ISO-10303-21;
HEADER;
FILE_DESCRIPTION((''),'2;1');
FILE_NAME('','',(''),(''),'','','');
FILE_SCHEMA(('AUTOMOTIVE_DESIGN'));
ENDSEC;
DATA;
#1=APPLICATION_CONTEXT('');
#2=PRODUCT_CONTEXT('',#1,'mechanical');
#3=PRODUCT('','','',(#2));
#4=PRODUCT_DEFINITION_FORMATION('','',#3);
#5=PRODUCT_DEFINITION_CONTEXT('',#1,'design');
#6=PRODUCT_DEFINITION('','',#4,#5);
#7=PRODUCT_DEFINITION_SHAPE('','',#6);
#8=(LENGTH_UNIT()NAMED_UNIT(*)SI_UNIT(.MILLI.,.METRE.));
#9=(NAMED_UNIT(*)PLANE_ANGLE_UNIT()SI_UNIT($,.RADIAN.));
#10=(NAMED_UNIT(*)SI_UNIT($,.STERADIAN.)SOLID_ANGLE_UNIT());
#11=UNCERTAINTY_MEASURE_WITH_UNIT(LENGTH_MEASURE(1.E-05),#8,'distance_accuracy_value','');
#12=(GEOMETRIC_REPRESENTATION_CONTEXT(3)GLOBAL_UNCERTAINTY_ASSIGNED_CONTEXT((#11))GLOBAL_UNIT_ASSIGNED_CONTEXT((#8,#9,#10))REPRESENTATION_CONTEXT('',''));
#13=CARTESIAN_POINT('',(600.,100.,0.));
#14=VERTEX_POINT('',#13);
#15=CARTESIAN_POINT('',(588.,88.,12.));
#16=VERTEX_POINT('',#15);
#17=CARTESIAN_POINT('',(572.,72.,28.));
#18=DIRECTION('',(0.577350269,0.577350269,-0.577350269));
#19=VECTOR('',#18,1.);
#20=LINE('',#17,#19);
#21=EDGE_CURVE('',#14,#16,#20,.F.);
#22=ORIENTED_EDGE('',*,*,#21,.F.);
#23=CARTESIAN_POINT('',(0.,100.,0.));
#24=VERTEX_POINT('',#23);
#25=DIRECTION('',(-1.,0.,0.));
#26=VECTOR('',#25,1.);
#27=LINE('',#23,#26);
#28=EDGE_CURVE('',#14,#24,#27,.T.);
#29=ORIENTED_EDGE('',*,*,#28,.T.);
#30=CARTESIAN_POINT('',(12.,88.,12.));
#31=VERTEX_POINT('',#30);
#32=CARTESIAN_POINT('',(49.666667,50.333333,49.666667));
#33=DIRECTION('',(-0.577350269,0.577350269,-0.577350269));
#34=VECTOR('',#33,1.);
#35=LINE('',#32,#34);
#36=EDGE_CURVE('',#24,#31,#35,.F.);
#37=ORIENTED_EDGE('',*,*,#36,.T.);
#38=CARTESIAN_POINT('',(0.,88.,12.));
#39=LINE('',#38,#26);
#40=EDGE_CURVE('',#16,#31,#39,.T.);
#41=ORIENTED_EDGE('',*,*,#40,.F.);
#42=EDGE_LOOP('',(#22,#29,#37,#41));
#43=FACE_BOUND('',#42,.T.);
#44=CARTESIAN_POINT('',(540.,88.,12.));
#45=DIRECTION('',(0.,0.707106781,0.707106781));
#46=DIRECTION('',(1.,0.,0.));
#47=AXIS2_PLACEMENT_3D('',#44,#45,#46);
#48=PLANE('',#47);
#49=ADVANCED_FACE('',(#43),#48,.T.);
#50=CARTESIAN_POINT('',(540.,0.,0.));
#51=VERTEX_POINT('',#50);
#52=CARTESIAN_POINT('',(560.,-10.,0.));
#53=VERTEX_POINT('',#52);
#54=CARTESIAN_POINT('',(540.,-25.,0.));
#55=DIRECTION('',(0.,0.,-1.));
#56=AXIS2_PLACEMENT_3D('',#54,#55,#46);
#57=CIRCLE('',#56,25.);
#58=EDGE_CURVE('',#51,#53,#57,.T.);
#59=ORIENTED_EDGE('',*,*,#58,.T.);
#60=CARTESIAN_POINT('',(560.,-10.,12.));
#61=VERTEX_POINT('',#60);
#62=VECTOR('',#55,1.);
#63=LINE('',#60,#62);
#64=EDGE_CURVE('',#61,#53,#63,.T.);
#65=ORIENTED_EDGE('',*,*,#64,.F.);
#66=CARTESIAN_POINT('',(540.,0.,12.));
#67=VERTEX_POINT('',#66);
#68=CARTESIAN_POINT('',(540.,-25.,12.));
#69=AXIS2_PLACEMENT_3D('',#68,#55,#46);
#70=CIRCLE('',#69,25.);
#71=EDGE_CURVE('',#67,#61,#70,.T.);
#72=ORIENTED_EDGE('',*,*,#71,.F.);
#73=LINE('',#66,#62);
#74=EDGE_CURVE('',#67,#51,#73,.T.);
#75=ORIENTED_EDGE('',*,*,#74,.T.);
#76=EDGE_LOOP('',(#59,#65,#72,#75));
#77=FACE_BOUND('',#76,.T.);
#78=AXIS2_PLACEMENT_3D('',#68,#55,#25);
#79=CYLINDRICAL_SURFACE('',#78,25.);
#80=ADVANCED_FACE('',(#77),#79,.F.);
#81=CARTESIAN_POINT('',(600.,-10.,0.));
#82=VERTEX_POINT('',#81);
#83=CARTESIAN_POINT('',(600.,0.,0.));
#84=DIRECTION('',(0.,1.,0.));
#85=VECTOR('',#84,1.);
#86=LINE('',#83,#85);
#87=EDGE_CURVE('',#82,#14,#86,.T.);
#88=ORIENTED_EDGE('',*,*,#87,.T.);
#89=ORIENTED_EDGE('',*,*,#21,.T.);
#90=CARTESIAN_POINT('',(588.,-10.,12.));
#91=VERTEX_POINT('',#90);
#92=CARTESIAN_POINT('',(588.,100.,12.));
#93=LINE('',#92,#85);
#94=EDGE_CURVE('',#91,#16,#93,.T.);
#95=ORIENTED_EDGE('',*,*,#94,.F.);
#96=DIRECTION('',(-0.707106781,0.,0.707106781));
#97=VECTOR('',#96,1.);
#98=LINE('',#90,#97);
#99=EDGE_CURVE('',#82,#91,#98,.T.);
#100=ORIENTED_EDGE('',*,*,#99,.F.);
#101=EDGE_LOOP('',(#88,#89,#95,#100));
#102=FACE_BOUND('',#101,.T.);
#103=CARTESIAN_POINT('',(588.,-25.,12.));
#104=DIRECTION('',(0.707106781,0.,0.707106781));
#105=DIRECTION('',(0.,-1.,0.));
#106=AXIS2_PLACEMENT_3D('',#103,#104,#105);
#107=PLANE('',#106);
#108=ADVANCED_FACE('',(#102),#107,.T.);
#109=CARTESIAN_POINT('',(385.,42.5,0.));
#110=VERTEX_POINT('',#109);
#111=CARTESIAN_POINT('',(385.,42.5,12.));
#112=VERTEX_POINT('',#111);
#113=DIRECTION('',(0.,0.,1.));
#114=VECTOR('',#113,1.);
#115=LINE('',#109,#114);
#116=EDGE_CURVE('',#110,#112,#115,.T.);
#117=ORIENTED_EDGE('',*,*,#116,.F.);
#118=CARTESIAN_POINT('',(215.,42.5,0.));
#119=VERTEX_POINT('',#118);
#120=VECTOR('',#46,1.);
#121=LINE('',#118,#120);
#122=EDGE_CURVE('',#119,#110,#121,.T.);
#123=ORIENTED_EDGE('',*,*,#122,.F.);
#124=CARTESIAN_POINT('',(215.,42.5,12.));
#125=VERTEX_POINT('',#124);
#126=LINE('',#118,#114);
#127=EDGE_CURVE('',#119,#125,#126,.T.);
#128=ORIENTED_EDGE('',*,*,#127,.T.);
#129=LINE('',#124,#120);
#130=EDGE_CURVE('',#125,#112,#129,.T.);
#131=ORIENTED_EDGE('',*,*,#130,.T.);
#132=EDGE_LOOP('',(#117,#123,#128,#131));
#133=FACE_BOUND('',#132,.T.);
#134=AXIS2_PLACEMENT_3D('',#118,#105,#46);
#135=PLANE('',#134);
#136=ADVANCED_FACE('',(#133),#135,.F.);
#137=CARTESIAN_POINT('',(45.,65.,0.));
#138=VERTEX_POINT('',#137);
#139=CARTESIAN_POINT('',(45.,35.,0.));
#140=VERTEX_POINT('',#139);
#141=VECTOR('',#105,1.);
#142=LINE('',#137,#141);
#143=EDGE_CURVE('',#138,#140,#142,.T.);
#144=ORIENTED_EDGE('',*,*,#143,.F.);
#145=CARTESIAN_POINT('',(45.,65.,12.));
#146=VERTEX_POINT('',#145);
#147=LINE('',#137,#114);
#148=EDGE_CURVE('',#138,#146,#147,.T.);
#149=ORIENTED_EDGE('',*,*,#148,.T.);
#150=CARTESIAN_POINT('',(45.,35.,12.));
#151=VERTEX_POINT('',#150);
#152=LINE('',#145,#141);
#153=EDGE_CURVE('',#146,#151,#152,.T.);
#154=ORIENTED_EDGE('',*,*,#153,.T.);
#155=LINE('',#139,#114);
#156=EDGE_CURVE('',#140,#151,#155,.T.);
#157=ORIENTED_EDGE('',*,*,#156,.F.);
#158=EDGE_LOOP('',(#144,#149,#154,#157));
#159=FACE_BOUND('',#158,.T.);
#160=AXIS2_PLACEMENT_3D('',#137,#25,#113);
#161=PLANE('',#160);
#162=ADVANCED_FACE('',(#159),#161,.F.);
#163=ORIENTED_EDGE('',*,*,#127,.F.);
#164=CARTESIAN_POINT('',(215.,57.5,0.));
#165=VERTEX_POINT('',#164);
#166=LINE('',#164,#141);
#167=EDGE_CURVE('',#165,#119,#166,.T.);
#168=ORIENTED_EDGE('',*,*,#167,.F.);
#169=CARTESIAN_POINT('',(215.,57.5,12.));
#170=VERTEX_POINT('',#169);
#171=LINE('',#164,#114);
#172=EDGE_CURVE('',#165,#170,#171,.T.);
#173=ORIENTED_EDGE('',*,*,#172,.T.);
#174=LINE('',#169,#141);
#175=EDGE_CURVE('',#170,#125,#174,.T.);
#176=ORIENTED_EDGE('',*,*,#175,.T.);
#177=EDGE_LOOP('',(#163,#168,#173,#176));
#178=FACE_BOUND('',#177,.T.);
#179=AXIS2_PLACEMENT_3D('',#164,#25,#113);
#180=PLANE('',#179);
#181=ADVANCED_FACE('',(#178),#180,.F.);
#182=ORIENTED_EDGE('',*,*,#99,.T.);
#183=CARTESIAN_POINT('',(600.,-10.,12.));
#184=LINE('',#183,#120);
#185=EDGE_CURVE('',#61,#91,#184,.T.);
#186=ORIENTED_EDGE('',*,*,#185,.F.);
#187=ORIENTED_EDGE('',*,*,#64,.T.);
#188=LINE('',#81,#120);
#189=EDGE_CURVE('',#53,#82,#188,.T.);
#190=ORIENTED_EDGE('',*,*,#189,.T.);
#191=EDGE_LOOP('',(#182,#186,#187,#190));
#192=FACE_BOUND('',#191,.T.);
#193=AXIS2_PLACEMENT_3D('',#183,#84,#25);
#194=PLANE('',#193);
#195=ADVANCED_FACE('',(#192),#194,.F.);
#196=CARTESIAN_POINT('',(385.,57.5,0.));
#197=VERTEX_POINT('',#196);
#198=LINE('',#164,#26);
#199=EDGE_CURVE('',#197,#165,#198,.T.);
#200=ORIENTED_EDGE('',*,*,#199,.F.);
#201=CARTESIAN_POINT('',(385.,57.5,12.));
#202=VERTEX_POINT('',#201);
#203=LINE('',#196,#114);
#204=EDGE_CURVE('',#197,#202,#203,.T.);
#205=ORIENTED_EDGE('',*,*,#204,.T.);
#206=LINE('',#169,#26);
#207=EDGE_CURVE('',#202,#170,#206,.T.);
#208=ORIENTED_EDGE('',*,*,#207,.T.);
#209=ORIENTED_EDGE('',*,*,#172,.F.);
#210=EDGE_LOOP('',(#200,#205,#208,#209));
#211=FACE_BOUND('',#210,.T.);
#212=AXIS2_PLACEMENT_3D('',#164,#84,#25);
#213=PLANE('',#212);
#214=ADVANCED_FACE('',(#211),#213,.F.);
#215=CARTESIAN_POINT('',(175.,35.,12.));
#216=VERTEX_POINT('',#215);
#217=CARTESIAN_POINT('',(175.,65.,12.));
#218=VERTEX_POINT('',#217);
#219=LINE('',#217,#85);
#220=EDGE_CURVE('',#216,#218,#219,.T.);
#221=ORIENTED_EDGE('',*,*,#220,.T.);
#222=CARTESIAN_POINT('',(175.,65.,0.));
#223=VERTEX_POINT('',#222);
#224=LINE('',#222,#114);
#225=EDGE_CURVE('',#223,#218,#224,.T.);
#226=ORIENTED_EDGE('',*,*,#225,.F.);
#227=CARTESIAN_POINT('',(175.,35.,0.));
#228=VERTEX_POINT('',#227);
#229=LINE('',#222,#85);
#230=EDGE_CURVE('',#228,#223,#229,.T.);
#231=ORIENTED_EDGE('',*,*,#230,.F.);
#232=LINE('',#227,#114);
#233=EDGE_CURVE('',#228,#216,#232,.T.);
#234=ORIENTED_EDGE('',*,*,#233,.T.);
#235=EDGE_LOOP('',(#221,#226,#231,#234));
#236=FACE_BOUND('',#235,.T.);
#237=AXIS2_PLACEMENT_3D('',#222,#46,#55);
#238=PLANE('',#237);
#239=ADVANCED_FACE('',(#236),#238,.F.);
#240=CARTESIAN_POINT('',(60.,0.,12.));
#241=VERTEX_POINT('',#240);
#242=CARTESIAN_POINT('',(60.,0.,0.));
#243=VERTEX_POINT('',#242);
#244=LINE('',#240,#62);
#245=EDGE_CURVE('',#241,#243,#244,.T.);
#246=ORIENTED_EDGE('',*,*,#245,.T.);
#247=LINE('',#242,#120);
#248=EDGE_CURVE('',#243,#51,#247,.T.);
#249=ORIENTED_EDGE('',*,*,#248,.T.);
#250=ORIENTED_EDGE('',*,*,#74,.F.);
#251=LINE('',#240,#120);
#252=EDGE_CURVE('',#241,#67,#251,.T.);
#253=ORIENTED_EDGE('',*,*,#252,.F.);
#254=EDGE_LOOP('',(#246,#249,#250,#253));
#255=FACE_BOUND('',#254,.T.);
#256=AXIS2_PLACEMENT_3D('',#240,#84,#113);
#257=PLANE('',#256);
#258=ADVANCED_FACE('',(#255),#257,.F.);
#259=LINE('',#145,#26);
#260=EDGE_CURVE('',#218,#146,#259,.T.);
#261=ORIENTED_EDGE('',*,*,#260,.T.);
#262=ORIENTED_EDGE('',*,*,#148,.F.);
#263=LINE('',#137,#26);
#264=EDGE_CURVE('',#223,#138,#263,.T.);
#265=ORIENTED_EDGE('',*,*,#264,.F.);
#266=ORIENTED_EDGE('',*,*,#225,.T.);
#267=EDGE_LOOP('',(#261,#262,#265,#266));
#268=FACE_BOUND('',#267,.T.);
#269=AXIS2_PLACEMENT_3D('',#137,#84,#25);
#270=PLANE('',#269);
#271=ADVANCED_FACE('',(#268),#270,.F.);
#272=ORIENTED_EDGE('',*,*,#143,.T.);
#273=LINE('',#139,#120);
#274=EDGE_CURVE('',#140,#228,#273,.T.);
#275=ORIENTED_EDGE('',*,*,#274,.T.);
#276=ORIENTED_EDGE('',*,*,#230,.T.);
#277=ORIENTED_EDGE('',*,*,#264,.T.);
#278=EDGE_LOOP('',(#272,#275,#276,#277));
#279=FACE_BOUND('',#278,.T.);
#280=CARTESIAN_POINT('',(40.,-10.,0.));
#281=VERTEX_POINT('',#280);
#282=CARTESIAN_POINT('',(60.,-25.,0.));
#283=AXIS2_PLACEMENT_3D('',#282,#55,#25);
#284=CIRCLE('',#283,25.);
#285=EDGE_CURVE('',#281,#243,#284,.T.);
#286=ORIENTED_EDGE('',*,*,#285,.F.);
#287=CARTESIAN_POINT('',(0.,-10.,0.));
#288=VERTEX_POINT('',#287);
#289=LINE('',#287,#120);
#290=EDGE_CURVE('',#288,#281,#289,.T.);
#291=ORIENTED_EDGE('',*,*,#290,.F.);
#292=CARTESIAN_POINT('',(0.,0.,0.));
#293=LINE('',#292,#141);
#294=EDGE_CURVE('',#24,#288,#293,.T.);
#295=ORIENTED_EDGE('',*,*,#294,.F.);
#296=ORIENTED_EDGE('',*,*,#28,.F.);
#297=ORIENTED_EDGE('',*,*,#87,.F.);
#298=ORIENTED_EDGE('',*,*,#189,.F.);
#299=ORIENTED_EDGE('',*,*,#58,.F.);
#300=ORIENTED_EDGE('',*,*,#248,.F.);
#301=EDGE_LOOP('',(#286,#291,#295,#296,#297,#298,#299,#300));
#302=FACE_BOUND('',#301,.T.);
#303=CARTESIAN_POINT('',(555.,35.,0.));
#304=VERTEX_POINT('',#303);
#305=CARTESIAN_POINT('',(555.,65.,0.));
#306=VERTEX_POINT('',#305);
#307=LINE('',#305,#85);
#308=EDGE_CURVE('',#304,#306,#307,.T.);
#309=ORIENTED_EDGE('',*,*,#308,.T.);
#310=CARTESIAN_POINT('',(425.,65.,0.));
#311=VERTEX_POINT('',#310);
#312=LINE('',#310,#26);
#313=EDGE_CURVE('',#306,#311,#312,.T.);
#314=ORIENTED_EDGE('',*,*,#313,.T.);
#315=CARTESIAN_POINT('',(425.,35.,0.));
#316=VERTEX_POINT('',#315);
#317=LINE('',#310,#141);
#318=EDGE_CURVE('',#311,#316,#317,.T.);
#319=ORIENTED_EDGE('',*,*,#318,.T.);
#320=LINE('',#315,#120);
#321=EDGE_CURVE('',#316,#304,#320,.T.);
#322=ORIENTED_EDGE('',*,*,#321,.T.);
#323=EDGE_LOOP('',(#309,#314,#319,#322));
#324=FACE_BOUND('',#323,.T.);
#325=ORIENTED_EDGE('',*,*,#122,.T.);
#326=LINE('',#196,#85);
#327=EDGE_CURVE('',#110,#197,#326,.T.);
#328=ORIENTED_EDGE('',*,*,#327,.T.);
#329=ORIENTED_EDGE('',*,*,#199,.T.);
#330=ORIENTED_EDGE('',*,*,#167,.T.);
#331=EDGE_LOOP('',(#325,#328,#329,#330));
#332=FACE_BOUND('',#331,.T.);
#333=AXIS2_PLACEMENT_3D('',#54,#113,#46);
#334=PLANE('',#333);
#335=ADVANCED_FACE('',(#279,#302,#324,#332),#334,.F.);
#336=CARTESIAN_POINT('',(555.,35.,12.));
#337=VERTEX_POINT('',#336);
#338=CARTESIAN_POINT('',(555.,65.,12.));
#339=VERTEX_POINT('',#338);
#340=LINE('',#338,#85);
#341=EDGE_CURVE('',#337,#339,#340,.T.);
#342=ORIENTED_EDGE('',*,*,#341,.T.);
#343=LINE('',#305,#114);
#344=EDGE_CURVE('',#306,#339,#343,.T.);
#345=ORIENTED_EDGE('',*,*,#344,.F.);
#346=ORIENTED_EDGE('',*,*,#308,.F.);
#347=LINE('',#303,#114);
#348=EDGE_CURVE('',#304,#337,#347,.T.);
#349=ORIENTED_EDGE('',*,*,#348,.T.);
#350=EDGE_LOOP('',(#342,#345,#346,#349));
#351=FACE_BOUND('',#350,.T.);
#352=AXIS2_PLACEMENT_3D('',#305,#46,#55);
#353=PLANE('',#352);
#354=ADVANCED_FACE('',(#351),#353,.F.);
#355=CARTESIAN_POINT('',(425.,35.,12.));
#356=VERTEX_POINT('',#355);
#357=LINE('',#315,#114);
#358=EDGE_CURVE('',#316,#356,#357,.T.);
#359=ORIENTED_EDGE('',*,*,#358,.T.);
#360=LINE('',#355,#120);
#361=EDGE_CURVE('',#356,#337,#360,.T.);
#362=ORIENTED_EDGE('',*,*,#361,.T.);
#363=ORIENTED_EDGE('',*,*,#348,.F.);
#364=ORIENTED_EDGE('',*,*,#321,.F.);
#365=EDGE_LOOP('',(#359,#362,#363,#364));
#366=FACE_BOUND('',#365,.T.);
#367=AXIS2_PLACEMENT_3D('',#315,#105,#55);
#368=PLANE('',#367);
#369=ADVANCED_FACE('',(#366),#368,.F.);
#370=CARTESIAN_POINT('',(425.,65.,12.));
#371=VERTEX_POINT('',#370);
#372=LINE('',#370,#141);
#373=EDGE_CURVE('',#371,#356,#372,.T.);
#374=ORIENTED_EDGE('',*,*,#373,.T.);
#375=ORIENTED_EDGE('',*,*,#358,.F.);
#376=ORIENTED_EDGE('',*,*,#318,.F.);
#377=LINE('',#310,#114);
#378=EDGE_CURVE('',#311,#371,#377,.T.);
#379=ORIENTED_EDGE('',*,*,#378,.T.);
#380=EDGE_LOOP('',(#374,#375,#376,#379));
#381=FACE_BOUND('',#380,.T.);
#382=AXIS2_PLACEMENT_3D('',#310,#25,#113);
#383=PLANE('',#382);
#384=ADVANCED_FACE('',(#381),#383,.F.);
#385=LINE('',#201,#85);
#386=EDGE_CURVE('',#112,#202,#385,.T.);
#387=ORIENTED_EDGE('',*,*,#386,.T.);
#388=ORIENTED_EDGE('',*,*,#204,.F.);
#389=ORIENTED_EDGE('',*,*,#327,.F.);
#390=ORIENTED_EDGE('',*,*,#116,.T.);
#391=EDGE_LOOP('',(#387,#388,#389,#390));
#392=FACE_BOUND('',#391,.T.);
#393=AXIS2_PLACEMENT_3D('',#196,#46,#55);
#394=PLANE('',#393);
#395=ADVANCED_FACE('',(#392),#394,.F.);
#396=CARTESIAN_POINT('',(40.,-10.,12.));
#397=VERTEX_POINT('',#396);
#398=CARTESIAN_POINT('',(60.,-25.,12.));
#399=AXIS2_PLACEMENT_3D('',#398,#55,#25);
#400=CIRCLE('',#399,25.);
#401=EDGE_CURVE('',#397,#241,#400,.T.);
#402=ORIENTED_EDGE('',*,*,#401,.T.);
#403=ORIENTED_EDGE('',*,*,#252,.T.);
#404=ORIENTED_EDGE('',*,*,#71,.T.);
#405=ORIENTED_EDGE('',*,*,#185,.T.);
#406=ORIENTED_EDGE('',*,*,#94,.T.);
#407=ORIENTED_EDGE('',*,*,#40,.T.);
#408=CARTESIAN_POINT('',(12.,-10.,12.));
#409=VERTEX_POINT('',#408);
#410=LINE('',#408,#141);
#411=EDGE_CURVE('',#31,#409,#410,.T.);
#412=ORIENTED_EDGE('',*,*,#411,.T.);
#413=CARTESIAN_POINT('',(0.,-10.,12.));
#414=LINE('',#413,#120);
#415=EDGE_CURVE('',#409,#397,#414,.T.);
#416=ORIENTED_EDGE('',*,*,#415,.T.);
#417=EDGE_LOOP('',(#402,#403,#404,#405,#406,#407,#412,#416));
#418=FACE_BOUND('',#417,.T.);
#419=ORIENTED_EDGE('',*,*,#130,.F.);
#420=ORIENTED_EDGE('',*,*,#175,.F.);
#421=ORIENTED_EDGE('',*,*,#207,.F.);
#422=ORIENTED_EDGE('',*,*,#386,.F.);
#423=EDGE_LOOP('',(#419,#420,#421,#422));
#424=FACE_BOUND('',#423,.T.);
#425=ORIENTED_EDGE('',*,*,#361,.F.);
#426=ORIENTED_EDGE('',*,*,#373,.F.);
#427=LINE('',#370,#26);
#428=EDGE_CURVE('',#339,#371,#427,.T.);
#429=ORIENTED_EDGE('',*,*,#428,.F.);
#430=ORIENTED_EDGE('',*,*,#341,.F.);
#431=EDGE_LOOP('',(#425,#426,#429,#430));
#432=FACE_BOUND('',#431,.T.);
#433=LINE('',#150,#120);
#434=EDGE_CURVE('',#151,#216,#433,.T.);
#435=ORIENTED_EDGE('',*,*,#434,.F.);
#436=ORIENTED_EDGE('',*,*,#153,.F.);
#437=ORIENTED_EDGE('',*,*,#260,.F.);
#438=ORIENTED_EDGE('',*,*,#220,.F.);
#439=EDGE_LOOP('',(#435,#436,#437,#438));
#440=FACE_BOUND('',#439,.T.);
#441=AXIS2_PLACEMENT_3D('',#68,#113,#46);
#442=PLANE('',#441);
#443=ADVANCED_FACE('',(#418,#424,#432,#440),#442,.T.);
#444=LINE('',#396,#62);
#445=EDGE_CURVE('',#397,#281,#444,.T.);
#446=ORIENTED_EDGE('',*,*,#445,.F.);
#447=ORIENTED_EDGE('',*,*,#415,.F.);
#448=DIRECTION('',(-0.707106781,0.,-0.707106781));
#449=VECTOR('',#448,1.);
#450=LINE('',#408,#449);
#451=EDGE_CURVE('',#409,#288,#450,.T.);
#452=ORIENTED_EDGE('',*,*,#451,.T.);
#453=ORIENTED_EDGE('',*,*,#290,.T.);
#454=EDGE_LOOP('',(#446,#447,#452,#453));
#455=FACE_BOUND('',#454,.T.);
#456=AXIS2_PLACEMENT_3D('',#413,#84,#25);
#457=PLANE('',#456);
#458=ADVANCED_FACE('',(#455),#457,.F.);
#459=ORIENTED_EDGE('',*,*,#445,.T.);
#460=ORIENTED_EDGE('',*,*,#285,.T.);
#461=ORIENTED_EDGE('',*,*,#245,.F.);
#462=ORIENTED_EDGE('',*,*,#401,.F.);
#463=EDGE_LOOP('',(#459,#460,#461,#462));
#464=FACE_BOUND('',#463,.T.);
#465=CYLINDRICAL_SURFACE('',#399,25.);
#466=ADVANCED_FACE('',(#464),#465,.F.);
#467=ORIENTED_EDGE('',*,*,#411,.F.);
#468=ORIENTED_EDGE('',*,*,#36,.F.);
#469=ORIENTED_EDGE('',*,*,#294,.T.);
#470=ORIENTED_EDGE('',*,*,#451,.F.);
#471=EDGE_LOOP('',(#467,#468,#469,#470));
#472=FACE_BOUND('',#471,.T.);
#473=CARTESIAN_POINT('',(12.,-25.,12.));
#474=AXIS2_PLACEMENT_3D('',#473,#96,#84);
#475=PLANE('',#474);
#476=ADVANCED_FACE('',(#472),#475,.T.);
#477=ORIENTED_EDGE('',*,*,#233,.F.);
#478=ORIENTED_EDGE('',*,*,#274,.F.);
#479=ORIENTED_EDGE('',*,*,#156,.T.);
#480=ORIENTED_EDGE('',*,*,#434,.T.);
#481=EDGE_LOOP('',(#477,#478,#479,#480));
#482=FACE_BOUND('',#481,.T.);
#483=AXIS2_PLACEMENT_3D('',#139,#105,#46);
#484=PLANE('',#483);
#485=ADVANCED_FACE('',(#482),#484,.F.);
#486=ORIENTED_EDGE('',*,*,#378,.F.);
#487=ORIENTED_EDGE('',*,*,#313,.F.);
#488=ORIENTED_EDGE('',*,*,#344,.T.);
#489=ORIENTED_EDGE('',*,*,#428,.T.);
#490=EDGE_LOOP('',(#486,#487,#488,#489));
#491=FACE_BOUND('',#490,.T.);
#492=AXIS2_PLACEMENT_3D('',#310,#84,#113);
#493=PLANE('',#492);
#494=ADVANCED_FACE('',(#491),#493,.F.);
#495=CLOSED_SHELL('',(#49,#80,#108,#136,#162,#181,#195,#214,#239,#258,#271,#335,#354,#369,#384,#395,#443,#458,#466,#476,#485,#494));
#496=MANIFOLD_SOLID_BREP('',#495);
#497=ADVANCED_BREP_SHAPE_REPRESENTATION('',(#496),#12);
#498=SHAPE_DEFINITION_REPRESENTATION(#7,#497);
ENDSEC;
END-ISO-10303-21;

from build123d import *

# Parameters (mm, degrees)
BOSS_EXTRUDE1_DEPTH = 12
SKETCH2_W           = 130
SKETCH2_H           = 30
SKETCH2_W_2         = 170
SKETCH2_H_2         = 15
CUT_EXTRUDE1_DEPTH  = 609.394608786
CHAMFER1_SIZE       = 12


with BuildPart() as part:
    # Sketch1 → Boss-Extrude1 (new body)
    with BuildSketch(Plane.XY):
        with BuildLine():
            Line((0, 0), (0, -10))
            Line((0, -10), (40, -10))
            ThreePointArc((40, -10), (48.819660113, -2.639320225), (60, 0))
            Line((60, 0), (540, 0))
            ThreePointArc((540, 0), (551.180339887, -2.639320225), (560, -10))
            Line((560, -10), (600, -10))
            Line((600, -10), (600, 0))
            Line((600, 0), (600, 100))
            Line((600, 100), (0, 100))
            Line((0, 100), (0, 0))
        make_face()
    extrude(amount=BOSS_EXTRUDE1_DEPTH)

    # Sketch2 → Cut-Extrude1 (cut, through all)
    with BuildSketch(Plane.XY.offset(12)):
        with Locations((110, 50)):
            Rectangle(SKETCH2_W, SKETCH2_H)
        with Locations((300, 50)):
            Rectangle(SKETCH2_W_2, SKETCH2_H_2)
        with Locations((490, 50)):
            Rectangle(SKETCH2_W, SKETCH2_H)
    extrude(amount=-CUT_EXTRUDE1_DEPTH, mode=Mode.SUBTRACT)

    # Chamfer1
    chamfer1_edges = [part.edges().sort_by_distance(p)[0] for p in [
        (600, 45, 12),
        (300, 100, 12),
        (0, 45, 12),
    ]]
    chamfer(chamfer1_edges, length=CHAMFER1_SIZE - 0.0001)  # a hair under: the kernel refuses the full size


solid = part.part
